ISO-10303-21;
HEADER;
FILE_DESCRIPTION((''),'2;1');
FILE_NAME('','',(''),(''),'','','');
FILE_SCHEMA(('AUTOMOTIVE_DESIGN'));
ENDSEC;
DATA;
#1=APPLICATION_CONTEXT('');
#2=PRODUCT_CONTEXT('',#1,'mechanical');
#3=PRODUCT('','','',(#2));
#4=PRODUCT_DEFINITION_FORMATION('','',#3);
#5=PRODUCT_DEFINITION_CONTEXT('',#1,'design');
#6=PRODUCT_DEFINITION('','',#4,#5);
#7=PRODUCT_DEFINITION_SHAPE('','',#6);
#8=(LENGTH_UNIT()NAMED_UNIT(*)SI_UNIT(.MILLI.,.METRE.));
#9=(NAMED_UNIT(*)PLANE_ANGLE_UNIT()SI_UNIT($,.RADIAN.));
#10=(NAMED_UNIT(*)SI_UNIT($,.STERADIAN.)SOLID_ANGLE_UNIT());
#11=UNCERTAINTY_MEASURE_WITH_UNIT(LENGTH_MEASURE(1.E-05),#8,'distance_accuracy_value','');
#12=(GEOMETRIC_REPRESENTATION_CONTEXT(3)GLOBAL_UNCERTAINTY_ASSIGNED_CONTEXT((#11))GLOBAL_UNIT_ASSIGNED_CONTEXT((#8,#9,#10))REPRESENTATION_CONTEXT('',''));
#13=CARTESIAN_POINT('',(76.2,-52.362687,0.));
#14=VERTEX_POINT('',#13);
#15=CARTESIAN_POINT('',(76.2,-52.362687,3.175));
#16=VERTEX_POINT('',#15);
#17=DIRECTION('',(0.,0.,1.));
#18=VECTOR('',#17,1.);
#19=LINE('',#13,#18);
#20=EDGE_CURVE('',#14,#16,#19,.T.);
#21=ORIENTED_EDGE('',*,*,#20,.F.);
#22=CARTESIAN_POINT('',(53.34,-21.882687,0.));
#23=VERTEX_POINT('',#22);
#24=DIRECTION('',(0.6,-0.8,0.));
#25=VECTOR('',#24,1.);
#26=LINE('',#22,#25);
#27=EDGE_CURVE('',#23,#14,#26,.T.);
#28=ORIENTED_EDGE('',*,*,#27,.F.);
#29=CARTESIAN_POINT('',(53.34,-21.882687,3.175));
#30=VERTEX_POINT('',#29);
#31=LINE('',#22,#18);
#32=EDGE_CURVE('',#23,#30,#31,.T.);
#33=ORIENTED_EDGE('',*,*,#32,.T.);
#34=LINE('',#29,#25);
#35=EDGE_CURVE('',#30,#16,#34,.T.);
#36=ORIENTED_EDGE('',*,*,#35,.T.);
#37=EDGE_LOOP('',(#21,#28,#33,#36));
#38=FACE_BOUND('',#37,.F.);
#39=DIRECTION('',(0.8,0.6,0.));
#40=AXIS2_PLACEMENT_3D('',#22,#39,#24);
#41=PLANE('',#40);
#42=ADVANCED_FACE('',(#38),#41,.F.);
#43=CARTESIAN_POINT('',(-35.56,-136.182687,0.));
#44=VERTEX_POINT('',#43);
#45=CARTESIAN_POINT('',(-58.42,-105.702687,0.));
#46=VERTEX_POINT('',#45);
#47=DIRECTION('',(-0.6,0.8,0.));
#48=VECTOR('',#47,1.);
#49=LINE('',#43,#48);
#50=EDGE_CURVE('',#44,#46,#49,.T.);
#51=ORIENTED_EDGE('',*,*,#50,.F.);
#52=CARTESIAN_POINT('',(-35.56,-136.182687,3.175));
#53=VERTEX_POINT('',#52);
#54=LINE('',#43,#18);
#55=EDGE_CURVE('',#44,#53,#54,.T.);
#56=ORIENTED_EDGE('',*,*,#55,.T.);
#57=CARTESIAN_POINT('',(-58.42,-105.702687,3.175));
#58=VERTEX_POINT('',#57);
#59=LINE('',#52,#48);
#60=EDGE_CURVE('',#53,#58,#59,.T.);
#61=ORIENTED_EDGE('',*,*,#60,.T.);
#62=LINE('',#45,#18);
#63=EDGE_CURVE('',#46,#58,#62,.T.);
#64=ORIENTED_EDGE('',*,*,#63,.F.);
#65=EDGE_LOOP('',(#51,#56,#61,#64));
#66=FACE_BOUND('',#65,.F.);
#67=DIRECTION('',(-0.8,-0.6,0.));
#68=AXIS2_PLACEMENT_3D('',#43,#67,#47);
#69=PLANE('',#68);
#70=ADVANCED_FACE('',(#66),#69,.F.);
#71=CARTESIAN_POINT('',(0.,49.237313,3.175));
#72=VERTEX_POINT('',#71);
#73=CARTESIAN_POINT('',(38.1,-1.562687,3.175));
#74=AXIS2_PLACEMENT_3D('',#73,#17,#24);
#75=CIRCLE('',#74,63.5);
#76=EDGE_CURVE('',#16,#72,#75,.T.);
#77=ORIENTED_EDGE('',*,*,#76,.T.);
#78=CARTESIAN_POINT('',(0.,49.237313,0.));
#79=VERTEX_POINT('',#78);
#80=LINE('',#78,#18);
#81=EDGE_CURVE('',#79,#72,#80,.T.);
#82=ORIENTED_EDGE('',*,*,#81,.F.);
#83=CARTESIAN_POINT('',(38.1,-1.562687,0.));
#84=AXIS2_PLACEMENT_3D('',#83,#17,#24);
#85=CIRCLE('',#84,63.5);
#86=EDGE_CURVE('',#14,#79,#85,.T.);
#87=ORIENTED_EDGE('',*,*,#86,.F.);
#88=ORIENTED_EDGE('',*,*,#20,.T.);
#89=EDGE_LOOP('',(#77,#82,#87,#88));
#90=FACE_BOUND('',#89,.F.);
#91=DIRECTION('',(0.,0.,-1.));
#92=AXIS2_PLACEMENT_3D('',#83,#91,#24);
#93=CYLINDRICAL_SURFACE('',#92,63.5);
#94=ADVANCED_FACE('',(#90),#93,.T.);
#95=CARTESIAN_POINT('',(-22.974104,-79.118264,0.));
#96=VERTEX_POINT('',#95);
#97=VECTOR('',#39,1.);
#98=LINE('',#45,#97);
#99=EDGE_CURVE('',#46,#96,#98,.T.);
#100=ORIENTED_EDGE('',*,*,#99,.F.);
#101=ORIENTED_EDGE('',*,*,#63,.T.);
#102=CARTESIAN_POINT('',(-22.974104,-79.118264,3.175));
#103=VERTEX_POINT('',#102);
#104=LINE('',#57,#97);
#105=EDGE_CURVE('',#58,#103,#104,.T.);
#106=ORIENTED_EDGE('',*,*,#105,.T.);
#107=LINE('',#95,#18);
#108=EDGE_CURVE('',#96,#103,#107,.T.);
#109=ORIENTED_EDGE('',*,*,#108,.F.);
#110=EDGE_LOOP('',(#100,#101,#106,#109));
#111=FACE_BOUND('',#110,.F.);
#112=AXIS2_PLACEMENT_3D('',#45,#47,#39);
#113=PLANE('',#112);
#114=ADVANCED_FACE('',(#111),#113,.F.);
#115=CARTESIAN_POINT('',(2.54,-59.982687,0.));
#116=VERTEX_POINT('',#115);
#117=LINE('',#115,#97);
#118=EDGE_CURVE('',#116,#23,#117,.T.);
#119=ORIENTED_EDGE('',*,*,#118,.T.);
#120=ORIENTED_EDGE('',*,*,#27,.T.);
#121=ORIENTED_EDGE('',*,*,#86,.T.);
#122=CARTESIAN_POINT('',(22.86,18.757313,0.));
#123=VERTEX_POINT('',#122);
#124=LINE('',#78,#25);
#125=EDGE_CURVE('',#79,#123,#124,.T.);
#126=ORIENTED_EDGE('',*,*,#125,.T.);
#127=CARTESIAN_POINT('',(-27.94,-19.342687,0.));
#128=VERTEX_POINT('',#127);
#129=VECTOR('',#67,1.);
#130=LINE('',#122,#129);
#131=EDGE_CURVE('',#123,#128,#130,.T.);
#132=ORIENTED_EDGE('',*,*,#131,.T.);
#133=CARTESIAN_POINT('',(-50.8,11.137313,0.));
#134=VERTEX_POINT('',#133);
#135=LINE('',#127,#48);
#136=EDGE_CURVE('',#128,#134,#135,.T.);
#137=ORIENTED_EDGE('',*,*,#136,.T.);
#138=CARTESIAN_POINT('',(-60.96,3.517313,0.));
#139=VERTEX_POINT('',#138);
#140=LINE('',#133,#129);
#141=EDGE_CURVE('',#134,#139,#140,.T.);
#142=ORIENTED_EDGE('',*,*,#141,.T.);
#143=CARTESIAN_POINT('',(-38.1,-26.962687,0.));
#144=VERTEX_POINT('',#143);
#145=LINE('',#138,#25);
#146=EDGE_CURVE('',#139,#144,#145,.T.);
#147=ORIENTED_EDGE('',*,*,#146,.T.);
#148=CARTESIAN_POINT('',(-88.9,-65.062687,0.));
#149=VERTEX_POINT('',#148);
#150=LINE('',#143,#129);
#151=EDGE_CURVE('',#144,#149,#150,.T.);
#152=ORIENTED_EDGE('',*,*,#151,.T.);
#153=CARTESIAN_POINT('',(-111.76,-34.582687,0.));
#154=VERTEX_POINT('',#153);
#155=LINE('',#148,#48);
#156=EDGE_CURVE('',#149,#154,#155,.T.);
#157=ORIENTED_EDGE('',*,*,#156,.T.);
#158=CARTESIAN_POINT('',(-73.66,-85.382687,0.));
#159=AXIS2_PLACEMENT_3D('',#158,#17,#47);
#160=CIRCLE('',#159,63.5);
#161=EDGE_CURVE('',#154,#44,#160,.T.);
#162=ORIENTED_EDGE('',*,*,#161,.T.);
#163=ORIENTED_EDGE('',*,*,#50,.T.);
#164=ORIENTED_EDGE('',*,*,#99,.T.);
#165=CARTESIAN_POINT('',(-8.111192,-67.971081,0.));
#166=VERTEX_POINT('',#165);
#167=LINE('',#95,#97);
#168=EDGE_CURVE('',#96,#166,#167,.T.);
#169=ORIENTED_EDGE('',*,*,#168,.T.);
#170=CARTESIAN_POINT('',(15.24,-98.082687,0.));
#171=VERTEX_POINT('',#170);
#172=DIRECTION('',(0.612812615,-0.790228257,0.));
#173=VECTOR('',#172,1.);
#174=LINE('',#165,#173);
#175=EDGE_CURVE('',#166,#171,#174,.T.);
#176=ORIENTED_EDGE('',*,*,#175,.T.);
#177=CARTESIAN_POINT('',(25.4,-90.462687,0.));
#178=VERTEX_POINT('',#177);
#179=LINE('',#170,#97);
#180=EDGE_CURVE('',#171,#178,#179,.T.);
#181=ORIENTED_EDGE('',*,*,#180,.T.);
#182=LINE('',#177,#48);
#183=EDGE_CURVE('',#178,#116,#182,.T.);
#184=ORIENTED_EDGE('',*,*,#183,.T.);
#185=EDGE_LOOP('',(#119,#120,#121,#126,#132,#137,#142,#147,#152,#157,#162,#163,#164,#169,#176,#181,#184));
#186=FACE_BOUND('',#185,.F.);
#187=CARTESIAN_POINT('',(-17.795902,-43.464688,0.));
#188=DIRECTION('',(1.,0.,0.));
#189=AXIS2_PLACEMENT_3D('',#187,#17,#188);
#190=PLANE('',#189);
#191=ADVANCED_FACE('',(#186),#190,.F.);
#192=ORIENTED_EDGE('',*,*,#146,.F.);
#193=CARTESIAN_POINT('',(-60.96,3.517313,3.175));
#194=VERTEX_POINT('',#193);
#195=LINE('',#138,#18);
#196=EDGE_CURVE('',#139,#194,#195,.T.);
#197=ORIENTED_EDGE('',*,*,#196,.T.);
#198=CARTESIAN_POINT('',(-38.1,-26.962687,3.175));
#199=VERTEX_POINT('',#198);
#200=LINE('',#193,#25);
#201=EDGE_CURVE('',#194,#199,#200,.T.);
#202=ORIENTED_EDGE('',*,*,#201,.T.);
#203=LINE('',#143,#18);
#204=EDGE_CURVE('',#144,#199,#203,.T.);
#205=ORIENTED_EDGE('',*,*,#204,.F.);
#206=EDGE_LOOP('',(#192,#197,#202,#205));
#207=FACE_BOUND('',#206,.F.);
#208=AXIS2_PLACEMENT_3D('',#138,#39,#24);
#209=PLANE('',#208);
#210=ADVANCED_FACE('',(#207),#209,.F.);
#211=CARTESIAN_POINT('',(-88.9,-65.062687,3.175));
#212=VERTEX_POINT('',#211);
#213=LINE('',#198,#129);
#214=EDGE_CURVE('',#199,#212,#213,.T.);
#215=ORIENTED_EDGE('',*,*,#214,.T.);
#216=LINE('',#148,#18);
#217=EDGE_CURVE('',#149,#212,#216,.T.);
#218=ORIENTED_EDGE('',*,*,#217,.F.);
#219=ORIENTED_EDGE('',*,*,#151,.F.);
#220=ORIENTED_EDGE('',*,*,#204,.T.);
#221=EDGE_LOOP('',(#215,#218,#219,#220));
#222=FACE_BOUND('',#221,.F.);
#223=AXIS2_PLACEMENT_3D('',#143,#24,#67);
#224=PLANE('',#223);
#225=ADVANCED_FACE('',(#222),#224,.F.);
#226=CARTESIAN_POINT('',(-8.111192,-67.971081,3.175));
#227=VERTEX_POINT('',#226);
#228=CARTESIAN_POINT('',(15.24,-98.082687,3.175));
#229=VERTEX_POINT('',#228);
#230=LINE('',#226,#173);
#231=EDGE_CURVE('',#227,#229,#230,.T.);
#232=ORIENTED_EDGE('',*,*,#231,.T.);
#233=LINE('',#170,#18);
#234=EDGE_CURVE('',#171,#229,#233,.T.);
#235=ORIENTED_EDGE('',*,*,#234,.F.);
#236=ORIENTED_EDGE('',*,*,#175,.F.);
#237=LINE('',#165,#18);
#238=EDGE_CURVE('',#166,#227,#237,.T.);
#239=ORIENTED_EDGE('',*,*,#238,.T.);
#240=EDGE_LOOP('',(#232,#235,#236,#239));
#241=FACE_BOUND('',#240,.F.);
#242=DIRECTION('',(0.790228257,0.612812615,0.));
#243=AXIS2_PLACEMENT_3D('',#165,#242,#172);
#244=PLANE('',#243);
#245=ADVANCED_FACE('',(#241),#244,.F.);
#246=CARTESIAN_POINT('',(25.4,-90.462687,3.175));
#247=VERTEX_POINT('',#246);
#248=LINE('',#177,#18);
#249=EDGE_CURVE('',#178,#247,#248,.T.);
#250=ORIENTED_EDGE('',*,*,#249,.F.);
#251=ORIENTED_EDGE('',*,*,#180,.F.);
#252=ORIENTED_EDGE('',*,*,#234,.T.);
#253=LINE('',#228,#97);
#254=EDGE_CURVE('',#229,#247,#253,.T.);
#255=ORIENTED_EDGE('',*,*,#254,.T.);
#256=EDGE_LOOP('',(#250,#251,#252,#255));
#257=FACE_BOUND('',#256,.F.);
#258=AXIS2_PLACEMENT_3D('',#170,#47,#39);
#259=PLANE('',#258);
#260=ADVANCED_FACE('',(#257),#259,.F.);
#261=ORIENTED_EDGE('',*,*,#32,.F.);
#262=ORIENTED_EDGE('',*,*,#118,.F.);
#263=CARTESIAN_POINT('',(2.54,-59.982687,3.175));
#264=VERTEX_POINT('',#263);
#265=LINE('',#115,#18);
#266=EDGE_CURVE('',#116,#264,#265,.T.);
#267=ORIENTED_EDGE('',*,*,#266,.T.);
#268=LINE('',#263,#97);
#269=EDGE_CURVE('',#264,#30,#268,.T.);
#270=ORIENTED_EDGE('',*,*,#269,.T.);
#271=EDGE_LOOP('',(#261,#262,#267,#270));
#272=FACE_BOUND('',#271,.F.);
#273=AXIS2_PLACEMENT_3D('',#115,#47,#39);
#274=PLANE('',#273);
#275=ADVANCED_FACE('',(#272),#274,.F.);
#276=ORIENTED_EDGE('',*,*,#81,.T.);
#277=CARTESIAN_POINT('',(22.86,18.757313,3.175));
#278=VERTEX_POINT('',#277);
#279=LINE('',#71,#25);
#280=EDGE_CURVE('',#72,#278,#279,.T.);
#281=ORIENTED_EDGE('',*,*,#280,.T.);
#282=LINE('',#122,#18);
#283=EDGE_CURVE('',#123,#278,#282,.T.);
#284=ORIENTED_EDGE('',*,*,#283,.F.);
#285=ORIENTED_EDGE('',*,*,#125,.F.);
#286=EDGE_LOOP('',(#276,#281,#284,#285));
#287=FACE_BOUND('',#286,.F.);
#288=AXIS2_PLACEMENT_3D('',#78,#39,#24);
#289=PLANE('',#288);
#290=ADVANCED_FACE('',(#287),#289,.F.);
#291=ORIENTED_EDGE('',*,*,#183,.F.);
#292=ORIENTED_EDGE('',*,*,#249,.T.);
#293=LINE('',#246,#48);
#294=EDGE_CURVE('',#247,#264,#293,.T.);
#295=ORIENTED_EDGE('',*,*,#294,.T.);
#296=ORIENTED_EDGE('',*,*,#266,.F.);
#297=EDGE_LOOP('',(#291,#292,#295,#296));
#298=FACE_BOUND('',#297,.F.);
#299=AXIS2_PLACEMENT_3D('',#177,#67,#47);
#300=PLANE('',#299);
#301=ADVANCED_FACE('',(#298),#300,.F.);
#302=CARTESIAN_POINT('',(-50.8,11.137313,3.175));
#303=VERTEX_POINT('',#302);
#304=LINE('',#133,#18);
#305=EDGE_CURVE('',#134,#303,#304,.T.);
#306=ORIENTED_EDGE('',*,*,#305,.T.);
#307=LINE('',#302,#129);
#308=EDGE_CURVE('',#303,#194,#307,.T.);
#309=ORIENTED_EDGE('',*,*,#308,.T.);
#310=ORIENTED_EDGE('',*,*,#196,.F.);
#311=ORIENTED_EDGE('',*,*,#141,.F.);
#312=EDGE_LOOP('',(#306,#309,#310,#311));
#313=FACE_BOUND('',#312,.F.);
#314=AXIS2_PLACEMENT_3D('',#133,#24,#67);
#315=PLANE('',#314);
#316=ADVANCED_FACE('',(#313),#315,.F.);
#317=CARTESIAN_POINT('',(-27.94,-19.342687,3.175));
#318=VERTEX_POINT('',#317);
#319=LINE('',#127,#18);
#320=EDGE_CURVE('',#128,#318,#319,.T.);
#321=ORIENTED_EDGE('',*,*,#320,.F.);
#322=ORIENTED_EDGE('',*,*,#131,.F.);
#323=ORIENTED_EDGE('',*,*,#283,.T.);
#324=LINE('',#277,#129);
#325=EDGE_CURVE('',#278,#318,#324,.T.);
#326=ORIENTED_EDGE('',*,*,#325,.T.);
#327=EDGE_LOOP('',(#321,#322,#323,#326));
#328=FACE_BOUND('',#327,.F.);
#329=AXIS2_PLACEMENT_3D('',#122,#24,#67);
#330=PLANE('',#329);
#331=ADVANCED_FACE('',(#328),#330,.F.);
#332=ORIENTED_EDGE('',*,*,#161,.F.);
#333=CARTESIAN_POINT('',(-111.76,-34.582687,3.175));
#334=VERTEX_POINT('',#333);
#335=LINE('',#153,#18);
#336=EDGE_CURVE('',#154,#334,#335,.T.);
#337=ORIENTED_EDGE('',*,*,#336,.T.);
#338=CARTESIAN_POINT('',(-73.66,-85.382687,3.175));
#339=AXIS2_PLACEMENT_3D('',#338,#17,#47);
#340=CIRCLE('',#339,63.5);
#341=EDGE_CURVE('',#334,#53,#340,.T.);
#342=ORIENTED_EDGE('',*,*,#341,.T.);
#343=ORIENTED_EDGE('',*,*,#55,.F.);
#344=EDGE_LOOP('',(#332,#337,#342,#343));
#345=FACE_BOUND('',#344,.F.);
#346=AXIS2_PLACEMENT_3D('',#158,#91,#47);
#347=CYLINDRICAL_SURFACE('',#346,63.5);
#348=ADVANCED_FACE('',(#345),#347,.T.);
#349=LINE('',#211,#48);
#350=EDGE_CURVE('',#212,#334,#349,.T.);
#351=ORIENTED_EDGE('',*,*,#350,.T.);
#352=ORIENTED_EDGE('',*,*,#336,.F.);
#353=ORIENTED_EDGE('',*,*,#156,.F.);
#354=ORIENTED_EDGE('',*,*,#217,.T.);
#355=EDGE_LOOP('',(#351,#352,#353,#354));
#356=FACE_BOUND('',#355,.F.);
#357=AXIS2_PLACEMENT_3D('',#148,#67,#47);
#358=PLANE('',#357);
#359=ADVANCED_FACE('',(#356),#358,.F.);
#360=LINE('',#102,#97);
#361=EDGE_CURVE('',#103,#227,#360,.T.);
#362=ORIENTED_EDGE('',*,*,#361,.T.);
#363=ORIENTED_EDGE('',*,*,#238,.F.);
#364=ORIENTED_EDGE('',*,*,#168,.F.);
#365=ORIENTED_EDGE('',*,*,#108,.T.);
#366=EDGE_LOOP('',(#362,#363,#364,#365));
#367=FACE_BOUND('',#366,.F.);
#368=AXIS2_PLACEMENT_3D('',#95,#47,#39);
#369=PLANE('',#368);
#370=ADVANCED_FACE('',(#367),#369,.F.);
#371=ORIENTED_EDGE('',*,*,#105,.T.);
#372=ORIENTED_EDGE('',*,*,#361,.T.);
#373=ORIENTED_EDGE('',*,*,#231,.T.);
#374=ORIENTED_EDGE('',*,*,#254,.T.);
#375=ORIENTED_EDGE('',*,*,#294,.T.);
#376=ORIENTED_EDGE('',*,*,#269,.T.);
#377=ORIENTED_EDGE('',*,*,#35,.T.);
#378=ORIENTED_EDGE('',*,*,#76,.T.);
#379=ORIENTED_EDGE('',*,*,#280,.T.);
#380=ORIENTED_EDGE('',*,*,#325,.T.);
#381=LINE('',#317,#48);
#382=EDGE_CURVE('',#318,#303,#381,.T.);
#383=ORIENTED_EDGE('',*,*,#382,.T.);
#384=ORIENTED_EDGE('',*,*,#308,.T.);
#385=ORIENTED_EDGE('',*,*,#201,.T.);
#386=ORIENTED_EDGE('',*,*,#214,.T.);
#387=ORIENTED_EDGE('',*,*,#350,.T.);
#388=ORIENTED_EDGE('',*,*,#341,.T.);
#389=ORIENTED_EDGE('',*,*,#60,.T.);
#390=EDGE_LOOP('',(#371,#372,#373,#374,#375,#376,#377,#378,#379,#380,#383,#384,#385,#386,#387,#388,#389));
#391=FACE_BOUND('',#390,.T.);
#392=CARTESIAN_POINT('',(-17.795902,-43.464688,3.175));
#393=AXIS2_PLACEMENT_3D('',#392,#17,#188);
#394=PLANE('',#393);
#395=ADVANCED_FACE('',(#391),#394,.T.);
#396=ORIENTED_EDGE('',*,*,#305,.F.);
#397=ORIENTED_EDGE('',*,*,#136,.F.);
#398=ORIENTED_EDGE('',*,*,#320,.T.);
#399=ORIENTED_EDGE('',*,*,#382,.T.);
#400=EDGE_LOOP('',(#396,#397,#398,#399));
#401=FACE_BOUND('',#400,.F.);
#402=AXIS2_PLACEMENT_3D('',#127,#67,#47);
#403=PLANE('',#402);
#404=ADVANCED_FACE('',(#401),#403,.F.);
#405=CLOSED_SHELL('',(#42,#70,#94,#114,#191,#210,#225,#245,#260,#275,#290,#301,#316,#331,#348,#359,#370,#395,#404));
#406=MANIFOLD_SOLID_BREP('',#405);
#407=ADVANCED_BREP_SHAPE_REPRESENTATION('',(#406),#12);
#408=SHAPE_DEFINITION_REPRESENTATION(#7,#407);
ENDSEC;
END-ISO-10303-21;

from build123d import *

# Parameters (mm, degrees)
F1_DEPTH = 3.175
F3_DEPTH = 50.8
F4_R     = 6.35
F5_DEPTH = 50.8


# Not quite as in the source:
# - a length typed as a fraction of an inch, garbled in the dataset ("3 / 203.2 mm" for 3/8 in), is restored


with BuildPart() as f1:
    # F0 (on Top) → F1 (new body)
    with BuildSketch(Plane.XY):
        with BuildLine():
            Line((53.34, -21.8826867197), (76.2, -52.3626867197))
            ThreePointArc((76.2, -52.3626867197), (88.9, 36.5373132803), (0, 49.2373132803))
            Line((0, 49.2373132803), (22.86, 18.7573132803))
            Line((22.86, 18.7573132803), (-27.94, -19.3426867197))
            Line((-27.94, -19.3426867197), (-50.8, 11.1373132803))
            Line((-50.8, 11.1373132803), (-60.96, 3.5173132803))
            Line((-60.96, 3.5173132803), (-38.1, -26.9626867197))
            Line((-38.1, -26.9626867197), (-88.9, -65.0626867197))
            Line((-88.9, -65.0626867197), (-111.76, -34.5826867197))
            ThreePointArc((-111.76, -34.5826867197), (-124.46, -123.4826867197), (-35.56, -136.1826867197))
            Line((-35.56, -136.1826867197), (-58.42, -105.7026867197))
            Line((-58.42, -105.7026867197), (-22.9741035603, -79.11826439))
            Line((-22.9741035603, -79.11826439), (-8.1111921991, -67.971080869))
            Line((-8.1111921991, -67.971080869), (15.24, -98.0826867197))
            Line((15.24, -98.0826867197), (25.4, -90.4626867197))
            Line((25.4, -90.4626867197), (2.54, -59.9826867197))
            Line((2.54, -59.9826867197), (53.34, -21.8826867197))
        make_face()
    extrude(amount=F1_DEPTH)

    # F2 (on face) → F3 (cut)
    with BuildSketch(Plane(origin=(29.7060896255, -39.6081195006, 0), x_dir=(0.8, 0.6, 0), z_dir=(0.6, -0.8, 0))):
        with BuildLine():
            ThreePointArc((-78.7146071563, -9.525), (-83.2047352168, -20.3651280605), (-72.3646071563, -15.875))
            ThreePointArc((-72.3646071563, -15.875), (-74.2244790957, -11.3848719395), (-78.7146071563, -9.525))
        make_face()
    extrude(amount=-F3_DEPTH, mode=Mode.SUBTRACT)

    # F4 (on face) → F5 (cut)
    with BuildSketch(Plane(origin=(-0.7739103745, 1.0318804994, 0), x_dir=(-0.8, -0.6, 0), z_dir=(-0.6, 0.8, 0))):
        with Locations((2.2076120318, -15.875)):
            Circle(F4_R)
    extrude(amount=-F5_DEPTH, mode=Mode.SUBTRACT)


solid = f1.part
